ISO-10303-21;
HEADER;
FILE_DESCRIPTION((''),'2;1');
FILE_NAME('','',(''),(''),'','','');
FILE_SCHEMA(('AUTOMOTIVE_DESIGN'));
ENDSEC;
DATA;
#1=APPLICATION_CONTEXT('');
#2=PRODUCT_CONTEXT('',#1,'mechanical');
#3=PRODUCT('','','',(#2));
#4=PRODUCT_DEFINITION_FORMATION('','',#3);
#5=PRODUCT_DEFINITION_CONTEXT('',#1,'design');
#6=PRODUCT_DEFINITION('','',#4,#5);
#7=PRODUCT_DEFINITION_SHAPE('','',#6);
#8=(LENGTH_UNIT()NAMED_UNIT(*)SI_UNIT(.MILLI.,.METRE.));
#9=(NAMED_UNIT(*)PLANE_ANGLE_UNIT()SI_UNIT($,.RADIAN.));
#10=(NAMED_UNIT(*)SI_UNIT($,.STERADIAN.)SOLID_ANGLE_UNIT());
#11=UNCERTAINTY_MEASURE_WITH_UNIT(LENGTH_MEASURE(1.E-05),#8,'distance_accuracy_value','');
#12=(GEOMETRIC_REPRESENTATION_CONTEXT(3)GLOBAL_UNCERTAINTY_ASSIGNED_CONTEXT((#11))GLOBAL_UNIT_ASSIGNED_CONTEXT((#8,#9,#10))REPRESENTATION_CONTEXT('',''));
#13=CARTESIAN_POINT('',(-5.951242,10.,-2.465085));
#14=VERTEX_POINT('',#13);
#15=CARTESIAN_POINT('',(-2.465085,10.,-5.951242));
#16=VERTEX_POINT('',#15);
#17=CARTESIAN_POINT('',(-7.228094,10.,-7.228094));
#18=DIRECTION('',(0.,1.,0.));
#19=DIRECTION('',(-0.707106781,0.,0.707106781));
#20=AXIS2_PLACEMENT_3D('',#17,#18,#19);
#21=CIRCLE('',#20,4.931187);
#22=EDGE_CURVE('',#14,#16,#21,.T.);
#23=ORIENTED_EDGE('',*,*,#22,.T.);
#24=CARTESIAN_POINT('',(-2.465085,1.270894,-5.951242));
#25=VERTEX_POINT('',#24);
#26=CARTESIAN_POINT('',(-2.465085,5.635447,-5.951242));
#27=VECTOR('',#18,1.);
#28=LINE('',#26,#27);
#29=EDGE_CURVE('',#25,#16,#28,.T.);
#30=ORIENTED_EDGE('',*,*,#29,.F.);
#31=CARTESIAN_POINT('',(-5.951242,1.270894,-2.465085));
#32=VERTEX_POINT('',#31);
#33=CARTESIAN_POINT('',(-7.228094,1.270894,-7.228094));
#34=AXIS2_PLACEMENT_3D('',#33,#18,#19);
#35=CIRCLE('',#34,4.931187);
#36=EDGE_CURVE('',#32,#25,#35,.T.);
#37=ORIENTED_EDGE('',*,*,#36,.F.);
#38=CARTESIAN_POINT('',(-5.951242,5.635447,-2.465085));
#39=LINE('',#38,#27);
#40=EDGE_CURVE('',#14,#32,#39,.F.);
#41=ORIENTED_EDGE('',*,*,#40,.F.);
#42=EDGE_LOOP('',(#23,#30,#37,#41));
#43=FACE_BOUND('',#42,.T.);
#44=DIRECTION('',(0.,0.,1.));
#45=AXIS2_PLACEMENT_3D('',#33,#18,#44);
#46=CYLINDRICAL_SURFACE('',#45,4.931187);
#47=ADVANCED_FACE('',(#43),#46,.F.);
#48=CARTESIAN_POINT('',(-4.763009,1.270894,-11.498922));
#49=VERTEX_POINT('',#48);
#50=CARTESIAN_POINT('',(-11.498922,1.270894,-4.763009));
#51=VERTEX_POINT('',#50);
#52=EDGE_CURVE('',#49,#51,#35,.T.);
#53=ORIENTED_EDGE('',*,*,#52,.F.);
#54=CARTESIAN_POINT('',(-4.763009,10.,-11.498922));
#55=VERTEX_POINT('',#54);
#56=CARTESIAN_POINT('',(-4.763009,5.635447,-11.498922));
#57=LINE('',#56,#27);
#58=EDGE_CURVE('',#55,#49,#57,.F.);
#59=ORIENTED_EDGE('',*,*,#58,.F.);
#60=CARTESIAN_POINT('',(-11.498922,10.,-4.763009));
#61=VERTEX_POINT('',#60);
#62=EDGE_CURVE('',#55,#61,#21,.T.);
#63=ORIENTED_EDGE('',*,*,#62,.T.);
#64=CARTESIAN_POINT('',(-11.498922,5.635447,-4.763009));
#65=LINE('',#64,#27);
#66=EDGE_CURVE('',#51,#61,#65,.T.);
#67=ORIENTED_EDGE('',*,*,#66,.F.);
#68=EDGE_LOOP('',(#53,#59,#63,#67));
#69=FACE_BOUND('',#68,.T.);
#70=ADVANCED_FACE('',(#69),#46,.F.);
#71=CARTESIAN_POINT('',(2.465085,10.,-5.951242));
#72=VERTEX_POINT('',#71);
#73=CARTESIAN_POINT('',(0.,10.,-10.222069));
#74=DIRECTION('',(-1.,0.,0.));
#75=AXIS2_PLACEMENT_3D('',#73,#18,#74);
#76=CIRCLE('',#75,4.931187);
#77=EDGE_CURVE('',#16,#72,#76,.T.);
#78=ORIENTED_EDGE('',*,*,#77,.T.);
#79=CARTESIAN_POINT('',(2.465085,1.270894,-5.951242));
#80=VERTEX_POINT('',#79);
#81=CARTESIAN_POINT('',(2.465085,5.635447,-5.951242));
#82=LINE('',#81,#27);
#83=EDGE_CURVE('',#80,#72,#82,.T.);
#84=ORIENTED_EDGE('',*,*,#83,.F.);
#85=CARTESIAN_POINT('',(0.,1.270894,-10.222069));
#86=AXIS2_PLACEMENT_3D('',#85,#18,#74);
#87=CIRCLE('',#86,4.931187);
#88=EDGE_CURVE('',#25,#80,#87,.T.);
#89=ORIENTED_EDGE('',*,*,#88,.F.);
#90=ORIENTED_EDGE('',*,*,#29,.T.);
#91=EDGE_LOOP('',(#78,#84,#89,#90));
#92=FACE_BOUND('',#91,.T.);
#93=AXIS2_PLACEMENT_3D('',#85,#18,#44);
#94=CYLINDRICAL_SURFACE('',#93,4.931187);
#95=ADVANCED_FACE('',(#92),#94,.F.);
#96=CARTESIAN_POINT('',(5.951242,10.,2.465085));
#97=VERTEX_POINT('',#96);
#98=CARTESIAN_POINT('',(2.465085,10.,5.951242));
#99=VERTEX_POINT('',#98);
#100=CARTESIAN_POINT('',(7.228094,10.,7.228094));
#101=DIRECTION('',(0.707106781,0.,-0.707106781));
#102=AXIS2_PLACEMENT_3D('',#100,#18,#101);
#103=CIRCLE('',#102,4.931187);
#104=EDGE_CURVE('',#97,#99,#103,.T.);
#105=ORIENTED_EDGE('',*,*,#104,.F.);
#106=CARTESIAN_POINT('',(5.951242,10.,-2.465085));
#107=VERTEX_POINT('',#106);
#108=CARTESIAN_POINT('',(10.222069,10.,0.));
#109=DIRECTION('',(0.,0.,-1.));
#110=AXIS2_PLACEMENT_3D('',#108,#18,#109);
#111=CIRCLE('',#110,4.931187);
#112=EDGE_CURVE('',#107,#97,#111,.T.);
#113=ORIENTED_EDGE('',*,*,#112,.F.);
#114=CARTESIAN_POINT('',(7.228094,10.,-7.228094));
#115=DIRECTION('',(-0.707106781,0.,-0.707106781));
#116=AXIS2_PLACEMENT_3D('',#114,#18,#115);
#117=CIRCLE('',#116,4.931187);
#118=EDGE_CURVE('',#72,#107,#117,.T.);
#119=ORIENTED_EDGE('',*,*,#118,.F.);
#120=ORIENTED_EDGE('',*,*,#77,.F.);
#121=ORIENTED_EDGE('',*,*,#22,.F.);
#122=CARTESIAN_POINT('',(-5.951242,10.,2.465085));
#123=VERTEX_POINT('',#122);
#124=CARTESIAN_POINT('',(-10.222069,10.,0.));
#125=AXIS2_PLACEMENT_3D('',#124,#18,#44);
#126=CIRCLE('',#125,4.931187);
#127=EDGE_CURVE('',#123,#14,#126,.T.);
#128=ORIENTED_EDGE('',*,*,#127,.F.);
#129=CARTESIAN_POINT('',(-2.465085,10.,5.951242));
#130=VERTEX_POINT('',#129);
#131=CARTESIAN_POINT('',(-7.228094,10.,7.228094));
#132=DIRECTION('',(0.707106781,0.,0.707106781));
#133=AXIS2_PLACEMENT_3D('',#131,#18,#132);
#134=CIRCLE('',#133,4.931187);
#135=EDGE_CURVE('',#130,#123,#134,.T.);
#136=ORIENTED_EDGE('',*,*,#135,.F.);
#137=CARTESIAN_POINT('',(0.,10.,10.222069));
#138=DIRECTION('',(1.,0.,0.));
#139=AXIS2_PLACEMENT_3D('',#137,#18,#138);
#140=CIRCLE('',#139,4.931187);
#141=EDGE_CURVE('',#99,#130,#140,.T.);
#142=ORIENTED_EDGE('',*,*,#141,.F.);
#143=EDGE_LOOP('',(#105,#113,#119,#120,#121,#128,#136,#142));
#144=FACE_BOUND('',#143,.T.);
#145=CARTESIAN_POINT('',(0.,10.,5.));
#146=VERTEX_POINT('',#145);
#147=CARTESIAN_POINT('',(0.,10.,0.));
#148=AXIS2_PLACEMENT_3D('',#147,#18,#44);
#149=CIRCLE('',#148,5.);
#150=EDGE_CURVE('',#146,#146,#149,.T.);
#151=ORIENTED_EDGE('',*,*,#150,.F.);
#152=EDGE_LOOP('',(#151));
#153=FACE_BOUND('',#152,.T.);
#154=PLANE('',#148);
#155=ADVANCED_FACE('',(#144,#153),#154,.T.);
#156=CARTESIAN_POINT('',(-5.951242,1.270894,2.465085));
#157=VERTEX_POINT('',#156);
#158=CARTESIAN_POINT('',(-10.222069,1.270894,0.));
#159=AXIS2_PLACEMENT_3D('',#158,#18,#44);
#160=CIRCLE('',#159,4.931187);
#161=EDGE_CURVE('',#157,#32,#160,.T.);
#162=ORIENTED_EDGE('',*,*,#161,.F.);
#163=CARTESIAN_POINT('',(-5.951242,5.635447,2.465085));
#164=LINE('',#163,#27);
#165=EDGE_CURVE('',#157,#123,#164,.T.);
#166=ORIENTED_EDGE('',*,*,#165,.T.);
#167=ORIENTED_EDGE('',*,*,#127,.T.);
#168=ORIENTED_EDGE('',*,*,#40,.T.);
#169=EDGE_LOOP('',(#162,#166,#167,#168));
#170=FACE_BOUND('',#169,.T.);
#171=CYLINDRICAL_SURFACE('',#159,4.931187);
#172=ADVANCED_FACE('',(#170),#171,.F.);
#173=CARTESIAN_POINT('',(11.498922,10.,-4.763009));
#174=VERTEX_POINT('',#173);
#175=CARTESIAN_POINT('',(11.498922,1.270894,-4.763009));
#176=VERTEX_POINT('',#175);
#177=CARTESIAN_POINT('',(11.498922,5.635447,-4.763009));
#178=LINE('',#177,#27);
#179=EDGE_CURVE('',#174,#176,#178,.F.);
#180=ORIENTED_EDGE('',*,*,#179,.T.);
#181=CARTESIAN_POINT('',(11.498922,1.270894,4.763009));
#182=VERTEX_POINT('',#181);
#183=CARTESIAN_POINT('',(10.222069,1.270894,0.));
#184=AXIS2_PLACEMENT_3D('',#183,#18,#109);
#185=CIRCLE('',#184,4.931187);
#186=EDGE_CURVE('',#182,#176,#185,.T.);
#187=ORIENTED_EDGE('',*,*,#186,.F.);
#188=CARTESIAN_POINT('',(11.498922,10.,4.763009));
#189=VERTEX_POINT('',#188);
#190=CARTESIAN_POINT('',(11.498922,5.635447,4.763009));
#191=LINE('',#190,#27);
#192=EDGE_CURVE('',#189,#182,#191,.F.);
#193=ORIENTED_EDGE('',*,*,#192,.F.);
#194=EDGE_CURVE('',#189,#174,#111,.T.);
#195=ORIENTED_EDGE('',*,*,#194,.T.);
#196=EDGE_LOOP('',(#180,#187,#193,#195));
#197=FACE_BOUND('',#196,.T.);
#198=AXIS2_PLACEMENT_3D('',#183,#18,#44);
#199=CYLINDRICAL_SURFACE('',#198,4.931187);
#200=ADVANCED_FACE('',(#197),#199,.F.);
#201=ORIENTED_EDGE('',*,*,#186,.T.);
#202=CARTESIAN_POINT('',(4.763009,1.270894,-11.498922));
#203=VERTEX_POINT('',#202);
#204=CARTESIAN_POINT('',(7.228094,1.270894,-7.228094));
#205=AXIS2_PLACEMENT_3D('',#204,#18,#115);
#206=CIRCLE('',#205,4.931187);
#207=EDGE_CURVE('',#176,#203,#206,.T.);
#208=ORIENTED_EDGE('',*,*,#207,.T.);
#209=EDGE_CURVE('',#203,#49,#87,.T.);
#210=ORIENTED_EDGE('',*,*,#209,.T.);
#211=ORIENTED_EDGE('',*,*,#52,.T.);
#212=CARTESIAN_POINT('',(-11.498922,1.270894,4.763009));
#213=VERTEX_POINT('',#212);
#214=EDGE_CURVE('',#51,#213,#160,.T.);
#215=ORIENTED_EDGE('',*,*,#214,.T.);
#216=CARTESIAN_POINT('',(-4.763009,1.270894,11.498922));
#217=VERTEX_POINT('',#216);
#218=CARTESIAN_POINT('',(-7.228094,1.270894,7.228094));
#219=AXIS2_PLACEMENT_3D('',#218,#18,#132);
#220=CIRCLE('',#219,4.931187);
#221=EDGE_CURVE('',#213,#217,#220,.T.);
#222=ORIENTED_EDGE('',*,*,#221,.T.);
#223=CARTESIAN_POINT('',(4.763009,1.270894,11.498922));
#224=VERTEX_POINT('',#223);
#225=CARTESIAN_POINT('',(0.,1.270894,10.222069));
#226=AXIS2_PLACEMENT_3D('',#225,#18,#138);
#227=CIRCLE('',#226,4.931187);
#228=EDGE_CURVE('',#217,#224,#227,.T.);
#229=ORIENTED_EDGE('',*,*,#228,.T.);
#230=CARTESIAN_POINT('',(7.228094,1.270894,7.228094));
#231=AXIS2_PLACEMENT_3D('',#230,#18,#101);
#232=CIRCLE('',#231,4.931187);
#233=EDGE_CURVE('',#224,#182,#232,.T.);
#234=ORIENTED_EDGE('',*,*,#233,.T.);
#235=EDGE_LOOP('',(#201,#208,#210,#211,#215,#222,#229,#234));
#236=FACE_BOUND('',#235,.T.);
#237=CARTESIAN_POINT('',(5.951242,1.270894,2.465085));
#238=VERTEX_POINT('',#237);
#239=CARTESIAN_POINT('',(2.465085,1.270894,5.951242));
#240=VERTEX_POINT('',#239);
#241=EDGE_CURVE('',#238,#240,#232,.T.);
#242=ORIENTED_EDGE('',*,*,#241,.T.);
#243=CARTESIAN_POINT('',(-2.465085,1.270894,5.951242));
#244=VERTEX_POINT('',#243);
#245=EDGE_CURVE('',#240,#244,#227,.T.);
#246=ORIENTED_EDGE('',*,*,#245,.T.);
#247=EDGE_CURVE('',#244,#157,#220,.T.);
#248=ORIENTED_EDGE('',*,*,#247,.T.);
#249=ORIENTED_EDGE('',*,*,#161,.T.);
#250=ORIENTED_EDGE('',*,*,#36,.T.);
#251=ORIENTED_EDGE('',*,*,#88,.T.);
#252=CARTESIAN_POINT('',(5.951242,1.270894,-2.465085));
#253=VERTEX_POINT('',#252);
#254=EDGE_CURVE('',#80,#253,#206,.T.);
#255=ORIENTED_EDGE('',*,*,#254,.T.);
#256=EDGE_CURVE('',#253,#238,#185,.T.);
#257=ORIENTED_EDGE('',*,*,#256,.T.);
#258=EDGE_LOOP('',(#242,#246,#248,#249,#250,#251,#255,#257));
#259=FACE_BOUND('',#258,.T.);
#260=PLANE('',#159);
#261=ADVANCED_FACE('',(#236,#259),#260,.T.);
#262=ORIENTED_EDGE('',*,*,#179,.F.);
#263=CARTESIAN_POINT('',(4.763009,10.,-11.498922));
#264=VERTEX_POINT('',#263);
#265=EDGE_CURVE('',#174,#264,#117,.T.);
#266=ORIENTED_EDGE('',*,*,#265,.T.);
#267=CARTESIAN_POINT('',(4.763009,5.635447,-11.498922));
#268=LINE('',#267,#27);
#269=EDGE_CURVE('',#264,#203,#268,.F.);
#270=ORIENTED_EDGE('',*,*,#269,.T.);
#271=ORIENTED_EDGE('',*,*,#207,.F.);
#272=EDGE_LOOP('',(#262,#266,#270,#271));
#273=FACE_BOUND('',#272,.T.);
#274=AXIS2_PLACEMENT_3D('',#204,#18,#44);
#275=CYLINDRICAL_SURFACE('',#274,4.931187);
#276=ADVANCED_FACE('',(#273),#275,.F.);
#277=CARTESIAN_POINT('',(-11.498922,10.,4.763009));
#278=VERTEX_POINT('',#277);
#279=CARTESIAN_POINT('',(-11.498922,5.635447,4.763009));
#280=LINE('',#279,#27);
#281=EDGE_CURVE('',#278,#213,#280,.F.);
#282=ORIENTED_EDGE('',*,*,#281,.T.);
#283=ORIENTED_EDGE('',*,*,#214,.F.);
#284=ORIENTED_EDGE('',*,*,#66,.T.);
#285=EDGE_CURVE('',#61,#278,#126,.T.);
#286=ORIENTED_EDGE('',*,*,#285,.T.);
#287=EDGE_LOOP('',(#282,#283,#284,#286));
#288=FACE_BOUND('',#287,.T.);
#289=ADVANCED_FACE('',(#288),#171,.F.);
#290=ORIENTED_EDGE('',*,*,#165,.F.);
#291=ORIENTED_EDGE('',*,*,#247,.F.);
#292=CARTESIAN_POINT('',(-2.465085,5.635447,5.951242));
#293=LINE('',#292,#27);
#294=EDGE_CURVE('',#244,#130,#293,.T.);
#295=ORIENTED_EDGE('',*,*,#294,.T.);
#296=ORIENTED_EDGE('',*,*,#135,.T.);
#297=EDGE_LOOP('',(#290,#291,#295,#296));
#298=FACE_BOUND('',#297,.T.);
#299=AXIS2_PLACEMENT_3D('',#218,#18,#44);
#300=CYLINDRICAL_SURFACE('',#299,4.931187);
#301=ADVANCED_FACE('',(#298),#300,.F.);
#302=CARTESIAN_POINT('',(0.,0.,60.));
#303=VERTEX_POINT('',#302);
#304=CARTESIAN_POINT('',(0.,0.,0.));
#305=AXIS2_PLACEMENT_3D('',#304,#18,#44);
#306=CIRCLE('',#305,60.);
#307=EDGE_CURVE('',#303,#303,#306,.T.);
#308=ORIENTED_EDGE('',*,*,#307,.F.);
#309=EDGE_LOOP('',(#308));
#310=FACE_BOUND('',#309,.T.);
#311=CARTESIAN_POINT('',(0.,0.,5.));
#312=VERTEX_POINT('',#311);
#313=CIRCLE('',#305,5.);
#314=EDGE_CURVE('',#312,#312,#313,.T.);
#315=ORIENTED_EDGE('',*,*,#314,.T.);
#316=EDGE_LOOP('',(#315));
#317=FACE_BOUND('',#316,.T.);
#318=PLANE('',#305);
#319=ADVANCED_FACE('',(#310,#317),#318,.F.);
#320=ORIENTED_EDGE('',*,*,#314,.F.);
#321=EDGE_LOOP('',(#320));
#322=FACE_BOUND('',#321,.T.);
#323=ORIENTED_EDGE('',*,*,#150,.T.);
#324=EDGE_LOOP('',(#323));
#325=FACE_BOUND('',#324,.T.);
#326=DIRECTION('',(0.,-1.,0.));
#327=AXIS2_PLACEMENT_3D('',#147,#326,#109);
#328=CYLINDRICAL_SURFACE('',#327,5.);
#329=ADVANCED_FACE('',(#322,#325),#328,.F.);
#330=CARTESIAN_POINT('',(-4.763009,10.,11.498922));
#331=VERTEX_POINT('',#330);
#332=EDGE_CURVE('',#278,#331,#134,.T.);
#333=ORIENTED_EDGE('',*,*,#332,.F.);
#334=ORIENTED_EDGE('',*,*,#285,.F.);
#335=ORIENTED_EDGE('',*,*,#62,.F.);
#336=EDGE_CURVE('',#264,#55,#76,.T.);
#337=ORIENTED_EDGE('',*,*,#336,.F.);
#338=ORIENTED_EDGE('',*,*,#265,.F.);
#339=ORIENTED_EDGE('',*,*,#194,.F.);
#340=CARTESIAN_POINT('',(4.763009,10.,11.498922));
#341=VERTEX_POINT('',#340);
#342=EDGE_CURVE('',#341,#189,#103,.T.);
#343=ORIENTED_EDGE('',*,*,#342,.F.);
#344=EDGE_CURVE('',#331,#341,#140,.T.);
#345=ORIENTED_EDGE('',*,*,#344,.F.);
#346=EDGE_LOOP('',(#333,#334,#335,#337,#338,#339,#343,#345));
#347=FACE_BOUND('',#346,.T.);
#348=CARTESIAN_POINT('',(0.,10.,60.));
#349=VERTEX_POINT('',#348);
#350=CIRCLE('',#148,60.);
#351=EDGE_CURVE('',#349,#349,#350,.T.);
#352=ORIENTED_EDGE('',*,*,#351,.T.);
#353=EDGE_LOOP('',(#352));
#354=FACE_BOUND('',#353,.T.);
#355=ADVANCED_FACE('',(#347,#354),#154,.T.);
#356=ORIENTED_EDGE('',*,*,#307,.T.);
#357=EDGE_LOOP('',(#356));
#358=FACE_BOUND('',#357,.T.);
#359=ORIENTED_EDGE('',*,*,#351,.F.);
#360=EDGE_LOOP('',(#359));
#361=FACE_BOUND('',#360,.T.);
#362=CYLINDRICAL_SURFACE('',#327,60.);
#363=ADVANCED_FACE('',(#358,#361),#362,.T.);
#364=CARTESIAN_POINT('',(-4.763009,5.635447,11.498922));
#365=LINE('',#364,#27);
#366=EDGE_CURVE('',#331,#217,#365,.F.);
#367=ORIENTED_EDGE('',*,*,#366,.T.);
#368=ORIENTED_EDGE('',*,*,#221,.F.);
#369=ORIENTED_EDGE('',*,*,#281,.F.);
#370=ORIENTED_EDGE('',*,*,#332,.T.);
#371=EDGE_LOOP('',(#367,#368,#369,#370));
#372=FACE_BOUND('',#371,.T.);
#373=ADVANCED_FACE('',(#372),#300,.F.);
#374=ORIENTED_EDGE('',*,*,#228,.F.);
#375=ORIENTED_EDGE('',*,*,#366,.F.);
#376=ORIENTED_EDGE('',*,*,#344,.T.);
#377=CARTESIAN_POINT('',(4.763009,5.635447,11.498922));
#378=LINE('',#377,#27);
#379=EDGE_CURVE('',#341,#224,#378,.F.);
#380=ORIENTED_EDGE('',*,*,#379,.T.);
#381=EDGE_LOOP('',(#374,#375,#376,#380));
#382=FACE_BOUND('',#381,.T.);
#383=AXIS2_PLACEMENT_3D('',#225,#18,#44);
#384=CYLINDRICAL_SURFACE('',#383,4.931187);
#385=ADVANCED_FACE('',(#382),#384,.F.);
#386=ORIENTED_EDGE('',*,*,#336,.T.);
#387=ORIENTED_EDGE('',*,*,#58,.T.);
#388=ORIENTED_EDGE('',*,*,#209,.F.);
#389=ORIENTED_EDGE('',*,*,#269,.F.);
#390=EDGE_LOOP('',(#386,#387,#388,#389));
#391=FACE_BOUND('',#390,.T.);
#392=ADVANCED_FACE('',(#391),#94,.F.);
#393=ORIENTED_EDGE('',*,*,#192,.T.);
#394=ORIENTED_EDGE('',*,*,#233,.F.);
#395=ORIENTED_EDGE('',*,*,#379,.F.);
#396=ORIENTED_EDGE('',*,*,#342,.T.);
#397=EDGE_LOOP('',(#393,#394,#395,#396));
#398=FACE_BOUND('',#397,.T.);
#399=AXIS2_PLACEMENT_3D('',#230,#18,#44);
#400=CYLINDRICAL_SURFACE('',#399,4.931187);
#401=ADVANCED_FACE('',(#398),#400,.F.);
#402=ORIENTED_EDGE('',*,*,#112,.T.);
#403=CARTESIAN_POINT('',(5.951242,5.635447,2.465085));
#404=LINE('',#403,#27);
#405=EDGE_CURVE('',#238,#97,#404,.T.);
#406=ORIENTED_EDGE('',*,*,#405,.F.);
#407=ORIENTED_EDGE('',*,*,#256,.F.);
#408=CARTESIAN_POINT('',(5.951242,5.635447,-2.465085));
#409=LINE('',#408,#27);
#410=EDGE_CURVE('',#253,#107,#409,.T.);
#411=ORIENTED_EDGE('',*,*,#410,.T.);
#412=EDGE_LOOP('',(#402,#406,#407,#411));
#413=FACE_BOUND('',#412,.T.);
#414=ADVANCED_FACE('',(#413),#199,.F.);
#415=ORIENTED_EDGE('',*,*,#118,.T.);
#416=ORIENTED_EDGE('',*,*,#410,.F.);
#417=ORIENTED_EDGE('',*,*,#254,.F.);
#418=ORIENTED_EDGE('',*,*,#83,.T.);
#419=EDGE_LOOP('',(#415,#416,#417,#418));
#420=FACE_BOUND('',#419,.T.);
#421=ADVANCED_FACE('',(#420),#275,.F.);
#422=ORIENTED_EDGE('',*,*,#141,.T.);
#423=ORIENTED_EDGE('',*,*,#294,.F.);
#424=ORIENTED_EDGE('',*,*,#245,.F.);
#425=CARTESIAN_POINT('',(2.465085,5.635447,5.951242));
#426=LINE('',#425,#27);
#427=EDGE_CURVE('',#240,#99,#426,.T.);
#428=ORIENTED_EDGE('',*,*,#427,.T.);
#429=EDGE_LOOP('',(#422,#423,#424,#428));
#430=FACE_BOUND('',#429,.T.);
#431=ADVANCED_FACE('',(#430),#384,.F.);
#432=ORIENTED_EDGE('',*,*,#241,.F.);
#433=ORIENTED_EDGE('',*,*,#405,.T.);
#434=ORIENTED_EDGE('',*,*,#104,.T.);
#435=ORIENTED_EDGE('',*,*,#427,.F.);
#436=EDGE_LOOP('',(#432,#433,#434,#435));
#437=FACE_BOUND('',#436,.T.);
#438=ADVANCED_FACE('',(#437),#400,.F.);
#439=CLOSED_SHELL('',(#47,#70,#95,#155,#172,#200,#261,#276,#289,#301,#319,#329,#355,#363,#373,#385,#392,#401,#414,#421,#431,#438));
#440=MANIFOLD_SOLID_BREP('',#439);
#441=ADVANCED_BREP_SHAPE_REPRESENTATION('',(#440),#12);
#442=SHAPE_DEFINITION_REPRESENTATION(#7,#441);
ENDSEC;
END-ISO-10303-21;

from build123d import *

# Parameters (mm, degrees)
SKETCH1_R           = 60
BOSS_EXTRUDE1_DEPTH = 10
SKETCH2_R           = 5
CUT_EXTRUDE1_DEPTH  = 86.440037453
SKETCH3_R           = 4.931187375
CUT_EXTRUDE2_DEPTH  = 8.729105942
CIRPATTERN1_COUNT   = 8


with BuildPart() as part:
    # Sketch1 → Boss-Extrude1 (new body)
    with BuildSketch(Plane(origin=(0, 0, 0), x_dir=(1, 0, 0), z_dir=(0, 1, 0))):
        Circle(SKETCH1_R)
    extrude(amount=BOSS_EXTRUDE1_DEPTH)

    # Sketch2 → Cut-Extrude1 (cut, through all)
    with BuildSketch(Plane(origin=(0, 0, 0), x_dir=(1, 0, 0), z_dir=(0, 1, 0))):
        Circle(SKETCH2_R)
    extrude(amount=CUT_EXTRUDE1_DEPTH, mode=Mode.SUBTRACT)

    # Sketch3 → Cut-Extrude2 (cut)
    with BuildSketch(Plane(origin=(0, 10, 0), x_dir=(1, 0, 0), z_dir=(0, 1, 0))):
        with Locations((-10.222069231, 0)):
            Circle(SKETCH3_R)
    cut_extrude2 = extrude(amount=-CUT_EXTRUDE2_DEPTH, mode=Mode.SUBTRACT)

    # CirPattern1: Cut-Extrude2 ×8 about axis
    cirpattern1_axis = Axis((0, 0, 0), (0, 1, 0))
    for i in range(1, CIRPATTERN1_COUNT):
        add(cut_extrude2.rotate(cirpattern1_axis, i * 360 / CIRPATTERN1_COUNT), mode=Mode.SUBTRACT)


solid = part.part
